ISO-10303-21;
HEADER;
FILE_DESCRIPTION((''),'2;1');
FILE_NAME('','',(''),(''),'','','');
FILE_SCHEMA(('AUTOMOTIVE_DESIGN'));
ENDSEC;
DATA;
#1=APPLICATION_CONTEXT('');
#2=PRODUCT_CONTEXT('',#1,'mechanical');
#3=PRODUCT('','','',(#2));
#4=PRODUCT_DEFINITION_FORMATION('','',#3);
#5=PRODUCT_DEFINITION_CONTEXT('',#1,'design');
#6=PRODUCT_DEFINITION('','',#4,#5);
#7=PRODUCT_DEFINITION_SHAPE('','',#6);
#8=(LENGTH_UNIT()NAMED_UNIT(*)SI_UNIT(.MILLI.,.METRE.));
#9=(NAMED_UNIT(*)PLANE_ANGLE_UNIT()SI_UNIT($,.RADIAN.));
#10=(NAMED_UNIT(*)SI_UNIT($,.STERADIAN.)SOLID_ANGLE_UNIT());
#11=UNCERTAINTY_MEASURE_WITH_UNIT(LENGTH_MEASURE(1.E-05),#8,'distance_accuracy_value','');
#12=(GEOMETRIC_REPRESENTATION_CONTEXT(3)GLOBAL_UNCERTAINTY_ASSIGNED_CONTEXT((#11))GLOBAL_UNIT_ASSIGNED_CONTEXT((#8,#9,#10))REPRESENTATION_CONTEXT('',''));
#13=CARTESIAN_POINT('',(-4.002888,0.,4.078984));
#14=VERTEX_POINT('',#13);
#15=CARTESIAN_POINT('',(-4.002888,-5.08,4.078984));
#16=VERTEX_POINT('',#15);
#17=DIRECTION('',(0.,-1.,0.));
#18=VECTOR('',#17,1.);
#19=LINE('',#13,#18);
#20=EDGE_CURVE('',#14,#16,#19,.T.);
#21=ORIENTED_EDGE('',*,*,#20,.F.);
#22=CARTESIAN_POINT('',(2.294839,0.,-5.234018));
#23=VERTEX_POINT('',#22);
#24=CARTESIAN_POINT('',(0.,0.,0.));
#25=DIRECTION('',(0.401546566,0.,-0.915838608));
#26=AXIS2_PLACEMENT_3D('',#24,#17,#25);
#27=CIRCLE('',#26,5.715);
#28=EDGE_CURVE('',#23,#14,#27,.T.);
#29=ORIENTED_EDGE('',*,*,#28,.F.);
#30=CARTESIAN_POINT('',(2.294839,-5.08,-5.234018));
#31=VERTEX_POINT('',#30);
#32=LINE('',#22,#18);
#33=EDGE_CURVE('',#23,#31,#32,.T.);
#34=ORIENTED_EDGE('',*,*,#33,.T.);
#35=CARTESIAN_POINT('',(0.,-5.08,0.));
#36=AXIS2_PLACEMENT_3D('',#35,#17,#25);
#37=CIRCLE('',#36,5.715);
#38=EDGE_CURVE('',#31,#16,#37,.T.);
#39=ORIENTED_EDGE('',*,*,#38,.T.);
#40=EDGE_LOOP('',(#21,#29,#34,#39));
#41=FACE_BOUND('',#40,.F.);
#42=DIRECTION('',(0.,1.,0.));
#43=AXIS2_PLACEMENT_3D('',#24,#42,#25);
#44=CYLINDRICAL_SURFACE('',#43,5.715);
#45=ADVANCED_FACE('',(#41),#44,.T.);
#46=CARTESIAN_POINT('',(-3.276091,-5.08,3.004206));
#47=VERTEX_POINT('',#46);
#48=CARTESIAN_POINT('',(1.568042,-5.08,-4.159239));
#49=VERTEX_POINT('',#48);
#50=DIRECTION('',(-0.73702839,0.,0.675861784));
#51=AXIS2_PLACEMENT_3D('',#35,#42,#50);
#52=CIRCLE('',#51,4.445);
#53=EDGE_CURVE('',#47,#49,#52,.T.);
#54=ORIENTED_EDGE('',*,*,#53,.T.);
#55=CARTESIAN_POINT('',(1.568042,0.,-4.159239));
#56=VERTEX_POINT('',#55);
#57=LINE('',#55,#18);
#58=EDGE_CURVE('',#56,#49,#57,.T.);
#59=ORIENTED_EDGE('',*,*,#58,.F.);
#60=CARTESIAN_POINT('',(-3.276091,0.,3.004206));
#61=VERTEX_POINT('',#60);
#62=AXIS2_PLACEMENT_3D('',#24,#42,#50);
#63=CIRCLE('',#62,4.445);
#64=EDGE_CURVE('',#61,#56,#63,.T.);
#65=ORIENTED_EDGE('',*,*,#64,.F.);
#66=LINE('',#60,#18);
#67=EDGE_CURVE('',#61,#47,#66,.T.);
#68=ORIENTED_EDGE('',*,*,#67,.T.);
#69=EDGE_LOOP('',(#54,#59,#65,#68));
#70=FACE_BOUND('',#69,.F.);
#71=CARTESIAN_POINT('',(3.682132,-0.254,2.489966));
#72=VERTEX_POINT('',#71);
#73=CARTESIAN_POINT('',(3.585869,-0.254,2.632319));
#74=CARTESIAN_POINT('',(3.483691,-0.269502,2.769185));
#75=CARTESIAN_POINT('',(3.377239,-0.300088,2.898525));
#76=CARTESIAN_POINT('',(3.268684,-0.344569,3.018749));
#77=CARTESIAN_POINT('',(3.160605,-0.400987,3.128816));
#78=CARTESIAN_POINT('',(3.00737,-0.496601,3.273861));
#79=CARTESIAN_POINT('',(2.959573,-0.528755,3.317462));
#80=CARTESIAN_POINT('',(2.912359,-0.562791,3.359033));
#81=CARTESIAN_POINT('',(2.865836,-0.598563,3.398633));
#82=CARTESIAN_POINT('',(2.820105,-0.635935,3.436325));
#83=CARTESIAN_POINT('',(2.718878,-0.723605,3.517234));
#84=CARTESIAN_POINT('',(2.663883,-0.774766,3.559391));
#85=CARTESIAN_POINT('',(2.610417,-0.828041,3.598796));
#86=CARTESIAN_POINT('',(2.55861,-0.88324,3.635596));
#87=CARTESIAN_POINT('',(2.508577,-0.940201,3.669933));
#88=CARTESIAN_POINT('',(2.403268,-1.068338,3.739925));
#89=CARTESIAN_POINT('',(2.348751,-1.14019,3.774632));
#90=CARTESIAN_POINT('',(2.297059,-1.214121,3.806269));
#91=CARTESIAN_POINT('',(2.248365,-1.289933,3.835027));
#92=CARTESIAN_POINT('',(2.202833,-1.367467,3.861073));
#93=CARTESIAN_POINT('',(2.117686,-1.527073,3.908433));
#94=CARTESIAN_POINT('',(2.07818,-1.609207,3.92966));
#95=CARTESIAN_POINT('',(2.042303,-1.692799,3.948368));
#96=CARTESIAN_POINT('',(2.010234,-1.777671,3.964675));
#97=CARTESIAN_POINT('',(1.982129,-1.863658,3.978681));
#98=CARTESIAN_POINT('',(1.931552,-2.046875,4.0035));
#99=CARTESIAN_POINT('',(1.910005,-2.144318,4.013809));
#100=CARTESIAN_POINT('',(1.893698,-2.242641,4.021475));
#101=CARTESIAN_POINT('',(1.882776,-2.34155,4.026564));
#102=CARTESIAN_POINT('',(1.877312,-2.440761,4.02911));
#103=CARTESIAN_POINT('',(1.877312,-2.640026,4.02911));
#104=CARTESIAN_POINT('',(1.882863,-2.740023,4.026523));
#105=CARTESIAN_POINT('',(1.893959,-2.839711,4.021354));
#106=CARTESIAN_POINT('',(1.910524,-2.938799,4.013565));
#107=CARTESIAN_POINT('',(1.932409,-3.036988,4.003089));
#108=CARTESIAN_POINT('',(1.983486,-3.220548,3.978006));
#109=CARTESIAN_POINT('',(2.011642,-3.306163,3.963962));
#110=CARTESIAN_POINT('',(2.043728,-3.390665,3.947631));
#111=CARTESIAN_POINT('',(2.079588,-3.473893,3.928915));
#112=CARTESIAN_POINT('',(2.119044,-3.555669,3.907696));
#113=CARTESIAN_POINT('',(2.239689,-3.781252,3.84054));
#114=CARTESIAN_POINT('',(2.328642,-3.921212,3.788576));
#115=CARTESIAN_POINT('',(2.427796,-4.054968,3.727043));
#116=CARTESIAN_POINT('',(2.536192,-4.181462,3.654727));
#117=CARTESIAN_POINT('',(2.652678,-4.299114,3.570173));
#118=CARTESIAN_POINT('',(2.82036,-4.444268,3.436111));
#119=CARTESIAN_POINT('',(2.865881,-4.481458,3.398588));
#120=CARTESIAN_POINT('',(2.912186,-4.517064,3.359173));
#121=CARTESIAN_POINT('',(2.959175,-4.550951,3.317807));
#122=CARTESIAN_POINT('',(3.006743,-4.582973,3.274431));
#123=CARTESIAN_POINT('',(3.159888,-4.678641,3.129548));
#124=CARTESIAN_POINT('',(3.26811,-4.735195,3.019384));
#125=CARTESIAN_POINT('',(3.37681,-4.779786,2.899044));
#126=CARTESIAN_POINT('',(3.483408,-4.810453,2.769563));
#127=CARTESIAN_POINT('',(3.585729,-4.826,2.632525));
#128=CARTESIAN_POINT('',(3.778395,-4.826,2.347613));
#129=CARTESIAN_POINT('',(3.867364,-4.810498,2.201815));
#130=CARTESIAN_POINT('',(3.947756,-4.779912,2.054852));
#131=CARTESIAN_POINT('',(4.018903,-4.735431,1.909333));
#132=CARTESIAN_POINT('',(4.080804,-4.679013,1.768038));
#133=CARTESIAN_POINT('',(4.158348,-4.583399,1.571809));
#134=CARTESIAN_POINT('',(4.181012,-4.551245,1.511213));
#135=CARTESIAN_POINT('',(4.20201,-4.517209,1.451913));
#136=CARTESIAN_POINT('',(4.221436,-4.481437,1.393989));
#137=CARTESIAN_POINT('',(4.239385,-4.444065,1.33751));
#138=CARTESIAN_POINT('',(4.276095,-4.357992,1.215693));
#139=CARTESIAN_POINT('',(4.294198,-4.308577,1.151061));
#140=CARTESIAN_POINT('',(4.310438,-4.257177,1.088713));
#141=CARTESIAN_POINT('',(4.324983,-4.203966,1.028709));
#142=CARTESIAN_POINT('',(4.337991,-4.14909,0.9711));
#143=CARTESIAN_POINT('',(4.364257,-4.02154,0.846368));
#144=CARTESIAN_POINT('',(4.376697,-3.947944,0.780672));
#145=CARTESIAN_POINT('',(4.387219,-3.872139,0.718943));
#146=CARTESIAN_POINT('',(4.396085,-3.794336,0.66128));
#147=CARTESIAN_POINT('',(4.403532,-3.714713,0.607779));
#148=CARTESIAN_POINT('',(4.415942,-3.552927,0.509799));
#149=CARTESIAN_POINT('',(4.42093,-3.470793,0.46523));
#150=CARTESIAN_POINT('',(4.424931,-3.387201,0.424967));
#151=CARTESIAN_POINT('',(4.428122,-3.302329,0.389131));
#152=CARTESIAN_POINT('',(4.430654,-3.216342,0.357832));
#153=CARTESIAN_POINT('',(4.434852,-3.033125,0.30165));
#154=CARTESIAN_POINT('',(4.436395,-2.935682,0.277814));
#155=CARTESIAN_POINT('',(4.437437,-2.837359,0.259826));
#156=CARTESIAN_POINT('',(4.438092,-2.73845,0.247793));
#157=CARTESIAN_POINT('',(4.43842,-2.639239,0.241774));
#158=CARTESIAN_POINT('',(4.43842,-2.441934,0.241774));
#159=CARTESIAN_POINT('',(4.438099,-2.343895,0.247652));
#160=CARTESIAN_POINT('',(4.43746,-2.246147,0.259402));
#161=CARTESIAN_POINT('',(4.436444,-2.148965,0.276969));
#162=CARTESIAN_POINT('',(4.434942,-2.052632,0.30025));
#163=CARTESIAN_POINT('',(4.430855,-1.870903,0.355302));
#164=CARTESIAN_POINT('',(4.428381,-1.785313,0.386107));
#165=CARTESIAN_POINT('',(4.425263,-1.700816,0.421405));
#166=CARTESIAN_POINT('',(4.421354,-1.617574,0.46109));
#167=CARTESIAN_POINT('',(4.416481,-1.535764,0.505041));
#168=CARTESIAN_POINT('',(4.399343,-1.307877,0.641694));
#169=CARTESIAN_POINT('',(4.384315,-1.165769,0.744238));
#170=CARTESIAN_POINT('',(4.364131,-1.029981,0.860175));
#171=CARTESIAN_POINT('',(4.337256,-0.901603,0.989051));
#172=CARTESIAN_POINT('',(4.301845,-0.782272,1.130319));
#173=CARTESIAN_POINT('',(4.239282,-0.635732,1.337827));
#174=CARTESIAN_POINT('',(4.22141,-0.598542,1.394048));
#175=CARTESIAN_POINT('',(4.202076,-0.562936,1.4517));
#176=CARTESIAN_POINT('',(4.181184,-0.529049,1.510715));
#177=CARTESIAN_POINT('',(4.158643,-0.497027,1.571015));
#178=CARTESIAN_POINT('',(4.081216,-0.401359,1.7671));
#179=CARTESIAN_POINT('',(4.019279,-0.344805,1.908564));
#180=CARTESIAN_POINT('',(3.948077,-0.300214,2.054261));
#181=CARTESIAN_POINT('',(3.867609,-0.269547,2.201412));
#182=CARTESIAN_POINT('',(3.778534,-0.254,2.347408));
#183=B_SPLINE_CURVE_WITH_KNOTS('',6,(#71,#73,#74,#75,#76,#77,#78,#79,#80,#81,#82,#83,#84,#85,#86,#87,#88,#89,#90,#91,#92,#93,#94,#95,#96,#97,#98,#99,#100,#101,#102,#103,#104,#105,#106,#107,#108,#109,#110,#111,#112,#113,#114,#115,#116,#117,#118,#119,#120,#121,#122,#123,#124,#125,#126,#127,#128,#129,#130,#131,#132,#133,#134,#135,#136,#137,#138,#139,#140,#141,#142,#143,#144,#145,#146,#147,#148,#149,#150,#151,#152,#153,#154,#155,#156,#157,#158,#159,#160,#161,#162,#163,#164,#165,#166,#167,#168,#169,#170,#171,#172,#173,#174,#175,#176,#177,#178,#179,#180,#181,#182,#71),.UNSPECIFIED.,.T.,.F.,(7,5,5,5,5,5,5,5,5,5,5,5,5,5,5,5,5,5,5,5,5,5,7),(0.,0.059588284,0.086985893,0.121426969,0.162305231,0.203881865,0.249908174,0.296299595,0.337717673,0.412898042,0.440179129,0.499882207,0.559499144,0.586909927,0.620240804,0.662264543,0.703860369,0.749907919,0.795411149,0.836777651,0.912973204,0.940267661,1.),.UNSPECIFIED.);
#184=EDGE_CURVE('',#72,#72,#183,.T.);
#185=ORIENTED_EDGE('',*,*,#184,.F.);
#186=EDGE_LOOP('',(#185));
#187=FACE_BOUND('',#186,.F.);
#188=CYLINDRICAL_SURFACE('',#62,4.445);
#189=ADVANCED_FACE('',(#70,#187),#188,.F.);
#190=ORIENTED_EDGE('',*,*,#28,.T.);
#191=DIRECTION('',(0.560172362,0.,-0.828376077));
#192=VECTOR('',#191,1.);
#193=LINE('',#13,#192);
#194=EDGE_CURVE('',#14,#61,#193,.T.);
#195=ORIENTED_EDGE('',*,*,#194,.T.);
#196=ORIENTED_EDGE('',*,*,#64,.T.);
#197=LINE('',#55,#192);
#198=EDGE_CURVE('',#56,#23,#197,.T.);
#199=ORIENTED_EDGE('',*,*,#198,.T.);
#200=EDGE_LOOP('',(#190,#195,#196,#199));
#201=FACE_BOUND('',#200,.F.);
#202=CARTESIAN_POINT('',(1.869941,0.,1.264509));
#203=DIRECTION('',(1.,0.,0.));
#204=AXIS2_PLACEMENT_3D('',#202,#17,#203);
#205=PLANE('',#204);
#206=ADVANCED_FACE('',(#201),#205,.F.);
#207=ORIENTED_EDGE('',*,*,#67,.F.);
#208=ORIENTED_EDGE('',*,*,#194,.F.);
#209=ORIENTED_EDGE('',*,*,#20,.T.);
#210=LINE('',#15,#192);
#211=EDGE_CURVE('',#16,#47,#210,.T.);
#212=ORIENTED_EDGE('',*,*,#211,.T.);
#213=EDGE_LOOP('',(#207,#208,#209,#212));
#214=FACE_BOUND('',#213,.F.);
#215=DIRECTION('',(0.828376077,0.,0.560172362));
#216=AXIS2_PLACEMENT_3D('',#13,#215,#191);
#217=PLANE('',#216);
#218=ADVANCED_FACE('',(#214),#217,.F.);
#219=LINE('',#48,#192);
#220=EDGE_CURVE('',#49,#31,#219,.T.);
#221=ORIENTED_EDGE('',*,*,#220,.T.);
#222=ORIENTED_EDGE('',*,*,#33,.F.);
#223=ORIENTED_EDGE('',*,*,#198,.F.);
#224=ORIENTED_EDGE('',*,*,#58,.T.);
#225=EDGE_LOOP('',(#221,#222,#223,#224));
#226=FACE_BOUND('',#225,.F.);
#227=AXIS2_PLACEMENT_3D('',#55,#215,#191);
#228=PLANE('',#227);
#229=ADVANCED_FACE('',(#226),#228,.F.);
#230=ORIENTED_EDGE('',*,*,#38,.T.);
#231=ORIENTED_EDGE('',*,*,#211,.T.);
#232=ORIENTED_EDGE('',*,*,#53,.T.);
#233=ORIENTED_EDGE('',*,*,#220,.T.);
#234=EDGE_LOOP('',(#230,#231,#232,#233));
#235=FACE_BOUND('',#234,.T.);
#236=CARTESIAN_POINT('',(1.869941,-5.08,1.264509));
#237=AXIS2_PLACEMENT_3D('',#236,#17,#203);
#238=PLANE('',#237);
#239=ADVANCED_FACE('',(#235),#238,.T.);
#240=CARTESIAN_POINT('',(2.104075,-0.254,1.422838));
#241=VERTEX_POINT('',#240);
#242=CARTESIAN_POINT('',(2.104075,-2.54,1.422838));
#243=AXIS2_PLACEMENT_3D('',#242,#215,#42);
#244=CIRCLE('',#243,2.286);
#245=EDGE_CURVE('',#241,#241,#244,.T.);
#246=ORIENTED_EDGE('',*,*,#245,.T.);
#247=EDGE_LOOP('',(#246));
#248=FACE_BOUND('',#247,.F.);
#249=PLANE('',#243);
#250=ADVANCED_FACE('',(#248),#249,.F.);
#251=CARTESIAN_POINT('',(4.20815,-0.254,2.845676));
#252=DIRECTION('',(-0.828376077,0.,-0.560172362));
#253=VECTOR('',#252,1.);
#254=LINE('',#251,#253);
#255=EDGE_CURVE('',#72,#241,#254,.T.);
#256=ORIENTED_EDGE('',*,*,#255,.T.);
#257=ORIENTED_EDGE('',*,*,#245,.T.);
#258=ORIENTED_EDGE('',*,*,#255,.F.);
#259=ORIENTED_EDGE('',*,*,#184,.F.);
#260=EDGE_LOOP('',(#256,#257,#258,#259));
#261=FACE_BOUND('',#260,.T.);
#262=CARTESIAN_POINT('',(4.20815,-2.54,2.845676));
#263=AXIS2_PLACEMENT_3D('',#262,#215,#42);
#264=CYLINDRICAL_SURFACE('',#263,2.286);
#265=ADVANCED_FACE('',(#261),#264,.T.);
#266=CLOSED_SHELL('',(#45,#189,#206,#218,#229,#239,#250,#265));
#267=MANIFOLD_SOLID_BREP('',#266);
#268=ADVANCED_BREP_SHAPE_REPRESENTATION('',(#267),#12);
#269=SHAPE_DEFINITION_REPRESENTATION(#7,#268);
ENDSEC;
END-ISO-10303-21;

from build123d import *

# Parameters (mm, degrees)
F1_DEPTH = 5.08
F5_R     = 2.286
F6_DEPTH = 2.54


with BuildPart() as f1:
    # F0 (on Front) → F1 (new body)
    with BuildSketch(Plane.XZ):
        with BuildLine():
            ThreePointArc((-3.2760911955, 3.0042056319), (3.6821316631, 2.4899661475), (1.5680416715, -4.1592391512))
            Line((1.5680416715, -4.1592391512), (2.2948386219, -5.2340176442))
            ThreePointArc((2.2948386219, -5.2340176442), (4.7341692811, 3.2013850468), (-4.0028881459, 4.0789841249))
            Line((-4.0028881459, 4.0789841249), (-3.2760911955, 3.0042056319))
        make_face()
    extrude(amount=F1_DEPTH)

    # F5 (on mid) → F6 (join)
    with BuildSketch(Plane(origin=(4.2081504721, 0, 2.8456755972), x_dir=(0, 1, 0), z_dir=(0.8283760772, 0, 0.5601723617))):
        with Locations((-2.54, 0)):
            Circle(F5_R)
    extrude(amount=-F6_DEPTH)


solid = f1.part
